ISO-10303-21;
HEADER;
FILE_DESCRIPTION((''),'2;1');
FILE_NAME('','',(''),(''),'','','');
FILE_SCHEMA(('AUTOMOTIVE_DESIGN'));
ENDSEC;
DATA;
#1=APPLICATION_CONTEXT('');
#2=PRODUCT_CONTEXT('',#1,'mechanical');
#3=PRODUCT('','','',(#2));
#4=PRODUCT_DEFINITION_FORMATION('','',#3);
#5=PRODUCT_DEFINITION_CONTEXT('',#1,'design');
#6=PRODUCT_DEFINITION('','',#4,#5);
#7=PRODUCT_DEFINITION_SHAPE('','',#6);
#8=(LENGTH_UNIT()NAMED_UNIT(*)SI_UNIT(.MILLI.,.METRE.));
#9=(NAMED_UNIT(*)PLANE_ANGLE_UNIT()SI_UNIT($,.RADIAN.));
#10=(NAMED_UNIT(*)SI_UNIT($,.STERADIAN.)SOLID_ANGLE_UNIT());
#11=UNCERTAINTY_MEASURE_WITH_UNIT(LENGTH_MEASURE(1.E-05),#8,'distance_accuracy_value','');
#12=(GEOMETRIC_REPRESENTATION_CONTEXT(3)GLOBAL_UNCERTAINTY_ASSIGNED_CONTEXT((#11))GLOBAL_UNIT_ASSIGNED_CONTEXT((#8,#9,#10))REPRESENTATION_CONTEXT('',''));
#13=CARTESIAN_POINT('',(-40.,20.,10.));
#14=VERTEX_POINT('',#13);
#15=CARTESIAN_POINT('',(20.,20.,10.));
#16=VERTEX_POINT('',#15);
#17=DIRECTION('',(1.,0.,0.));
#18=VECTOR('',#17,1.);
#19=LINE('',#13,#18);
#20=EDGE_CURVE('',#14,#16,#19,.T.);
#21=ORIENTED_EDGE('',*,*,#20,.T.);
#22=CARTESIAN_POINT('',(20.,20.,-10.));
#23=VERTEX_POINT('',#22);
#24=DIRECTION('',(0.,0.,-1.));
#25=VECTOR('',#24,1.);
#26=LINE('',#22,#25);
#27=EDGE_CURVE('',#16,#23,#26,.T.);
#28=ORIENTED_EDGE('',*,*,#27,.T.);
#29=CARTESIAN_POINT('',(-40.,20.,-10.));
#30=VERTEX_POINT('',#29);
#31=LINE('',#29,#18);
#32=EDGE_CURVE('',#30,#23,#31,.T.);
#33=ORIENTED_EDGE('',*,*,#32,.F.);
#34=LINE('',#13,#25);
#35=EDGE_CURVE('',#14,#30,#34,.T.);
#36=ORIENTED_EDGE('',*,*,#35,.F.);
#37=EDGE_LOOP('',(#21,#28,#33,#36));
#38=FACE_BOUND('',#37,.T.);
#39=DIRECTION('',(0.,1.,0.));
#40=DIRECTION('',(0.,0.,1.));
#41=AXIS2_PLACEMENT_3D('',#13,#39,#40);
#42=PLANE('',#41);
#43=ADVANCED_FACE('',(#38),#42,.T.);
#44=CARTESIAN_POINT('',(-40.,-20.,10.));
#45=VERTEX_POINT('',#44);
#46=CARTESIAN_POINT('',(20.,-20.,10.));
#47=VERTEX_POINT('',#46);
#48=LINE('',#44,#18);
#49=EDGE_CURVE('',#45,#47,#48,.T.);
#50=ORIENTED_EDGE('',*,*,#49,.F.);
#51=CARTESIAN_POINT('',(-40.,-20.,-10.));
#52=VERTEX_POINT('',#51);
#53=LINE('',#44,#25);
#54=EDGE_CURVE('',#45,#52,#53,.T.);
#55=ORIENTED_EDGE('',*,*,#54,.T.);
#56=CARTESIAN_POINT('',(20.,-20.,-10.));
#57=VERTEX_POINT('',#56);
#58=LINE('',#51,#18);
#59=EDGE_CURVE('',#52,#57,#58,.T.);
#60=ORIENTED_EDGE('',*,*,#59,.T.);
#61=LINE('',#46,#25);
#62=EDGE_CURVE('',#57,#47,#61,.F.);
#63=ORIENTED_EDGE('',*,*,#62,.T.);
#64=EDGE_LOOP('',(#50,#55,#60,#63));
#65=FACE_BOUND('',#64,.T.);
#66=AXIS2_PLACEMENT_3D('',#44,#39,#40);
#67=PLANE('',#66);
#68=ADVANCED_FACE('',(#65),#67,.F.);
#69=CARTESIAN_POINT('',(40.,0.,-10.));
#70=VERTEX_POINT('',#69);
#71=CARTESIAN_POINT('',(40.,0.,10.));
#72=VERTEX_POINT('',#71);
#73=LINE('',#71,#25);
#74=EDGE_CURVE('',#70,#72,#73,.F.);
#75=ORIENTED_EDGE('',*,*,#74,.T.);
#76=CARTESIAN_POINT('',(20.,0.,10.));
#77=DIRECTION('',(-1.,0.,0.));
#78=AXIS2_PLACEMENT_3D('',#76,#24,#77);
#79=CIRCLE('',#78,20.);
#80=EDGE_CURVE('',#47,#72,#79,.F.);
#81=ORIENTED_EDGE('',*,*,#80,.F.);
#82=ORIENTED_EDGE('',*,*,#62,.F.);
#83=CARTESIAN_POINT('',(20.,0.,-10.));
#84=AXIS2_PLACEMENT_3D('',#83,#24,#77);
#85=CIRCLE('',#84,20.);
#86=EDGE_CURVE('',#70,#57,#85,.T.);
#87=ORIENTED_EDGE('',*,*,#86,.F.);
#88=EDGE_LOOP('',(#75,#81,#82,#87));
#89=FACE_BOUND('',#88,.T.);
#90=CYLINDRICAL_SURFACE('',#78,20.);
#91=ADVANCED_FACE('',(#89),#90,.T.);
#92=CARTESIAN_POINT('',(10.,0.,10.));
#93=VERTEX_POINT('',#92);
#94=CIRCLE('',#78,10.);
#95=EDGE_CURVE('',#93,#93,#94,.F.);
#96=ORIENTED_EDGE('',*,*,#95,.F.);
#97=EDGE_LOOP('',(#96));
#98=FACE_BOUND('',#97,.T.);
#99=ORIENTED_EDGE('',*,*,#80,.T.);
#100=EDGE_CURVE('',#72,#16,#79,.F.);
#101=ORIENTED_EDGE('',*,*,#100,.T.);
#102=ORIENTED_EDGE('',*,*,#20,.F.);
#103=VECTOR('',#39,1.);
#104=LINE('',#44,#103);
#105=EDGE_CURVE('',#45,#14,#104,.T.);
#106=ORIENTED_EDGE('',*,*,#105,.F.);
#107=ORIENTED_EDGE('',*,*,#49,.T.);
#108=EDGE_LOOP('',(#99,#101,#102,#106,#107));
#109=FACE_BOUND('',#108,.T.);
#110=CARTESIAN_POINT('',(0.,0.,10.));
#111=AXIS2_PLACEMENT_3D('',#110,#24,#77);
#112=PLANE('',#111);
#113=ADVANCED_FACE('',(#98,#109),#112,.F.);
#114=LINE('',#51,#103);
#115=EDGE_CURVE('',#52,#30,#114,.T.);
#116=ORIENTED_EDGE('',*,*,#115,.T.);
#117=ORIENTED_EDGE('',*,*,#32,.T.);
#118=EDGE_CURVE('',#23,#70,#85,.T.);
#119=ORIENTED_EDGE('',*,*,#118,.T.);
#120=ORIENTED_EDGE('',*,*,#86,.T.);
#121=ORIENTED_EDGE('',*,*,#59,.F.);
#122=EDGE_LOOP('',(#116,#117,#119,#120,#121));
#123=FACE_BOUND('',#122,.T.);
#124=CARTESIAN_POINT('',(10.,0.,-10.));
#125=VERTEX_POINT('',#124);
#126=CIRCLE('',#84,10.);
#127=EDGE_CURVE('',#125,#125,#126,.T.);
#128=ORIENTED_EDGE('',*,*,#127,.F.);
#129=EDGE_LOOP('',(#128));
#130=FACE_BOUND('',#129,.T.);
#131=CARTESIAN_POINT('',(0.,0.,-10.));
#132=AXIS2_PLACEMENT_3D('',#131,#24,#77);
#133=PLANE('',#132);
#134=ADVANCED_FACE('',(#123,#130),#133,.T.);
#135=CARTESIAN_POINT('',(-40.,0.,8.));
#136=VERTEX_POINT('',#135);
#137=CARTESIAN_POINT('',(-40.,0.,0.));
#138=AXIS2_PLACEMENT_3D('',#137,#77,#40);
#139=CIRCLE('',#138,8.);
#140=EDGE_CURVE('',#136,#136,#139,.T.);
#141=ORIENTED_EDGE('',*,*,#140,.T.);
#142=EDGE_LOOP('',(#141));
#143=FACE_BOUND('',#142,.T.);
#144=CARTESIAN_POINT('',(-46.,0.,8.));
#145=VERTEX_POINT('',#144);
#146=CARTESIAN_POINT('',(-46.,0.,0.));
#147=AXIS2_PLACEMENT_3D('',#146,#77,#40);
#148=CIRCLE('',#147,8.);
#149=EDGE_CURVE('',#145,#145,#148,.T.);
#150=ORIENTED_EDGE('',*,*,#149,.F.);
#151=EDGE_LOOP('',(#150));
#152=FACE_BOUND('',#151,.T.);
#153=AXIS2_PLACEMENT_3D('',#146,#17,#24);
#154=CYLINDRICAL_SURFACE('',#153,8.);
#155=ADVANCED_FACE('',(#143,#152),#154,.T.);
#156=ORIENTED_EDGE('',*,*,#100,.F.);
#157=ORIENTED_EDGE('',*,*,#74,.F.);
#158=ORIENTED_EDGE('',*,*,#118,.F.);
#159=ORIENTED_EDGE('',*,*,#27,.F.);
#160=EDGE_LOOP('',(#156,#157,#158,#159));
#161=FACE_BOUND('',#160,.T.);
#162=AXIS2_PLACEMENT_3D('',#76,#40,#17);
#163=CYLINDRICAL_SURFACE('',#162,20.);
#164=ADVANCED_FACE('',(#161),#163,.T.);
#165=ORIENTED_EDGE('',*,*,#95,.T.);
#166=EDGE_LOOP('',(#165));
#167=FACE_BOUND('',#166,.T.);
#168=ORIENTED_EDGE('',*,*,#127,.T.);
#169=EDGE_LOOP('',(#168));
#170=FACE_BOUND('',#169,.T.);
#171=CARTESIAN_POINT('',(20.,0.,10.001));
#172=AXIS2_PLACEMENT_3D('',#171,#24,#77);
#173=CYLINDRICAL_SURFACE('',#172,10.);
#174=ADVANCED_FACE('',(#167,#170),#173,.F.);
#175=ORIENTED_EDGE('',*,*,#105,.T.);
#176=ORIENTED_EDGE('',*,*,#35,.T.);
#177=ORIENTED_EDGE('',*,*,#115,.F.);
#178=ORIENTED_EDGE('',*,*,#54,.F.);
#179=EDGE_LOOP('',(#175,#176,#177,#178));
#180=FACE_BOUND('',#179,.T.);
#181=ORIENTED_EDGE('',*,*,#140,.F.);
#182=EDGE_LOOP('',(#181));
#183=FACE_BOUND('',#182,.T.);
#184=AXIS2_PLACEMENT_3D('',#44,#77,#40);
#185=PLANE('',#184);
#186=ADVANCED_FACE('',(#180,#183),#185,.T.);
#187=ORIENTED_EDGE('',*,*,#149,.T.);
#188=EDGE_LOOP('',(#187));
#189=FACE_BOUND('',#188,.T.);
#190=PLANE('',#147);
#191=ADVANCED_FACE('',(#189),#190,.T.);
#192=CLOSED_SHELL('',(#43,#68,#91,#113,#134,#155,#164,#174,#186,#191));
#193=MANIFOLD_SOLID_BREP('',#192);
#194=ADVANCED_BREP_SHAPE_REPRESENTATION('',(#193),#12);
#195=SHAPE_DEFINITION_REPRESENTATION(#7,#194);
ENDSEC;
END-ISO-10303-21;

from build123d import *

# Parameters (mm, degrees)
SKETCH_2_W          = 80
SKETCH_2_H          = 40
EXTRUDE_1_DEPTH     = 10
FILLET_3_R          = 20
CUT_EXTRUDE_6_REACH = 50.99
SKETCH_8_R          = 10
SKETCH_9_R          = 8
EXTRUDE_2_DEPTH     = 6


with BuildPart() as part:
    # 草图2 → 凸台-拉伸1 (new, symmetric)
    with BuildSketch(Plane.XY):
        Rectangle(SKETCH_2_W, SKETCH_2_H)
    extrude(amount=EXTRUDE_1_DEPTH, both=True)

    # 圆角3
    fillet_3_edges = [part.edges().sort_by_distance(p)[0] for p in [
        (40, -20, 0),
        (40, 20, 0),
    ]]
    fillet(fillet_3_edges, radius=FILLET_3_R - 0.0001)  # a hair under: the kernel refuses the full size

    # 草图8 → 切除-拉伸6 (cut, up to next)
    with BuildSketch(Plane(origin=(0, 0, -10), x_dir=(-1, 0, 0), z_dir=(0, 0, -1)), mode=Mode.PRIVATE) as cut_extrude_6_sk1:
        with Locations((-20, 0)):
            Circle(SKETCH_8_R)
    cut_extrude_6_tool1 = extrude(cut_extrude_6_sk1.sketch, amount=-CUT_EXTRUDE_6_REACH, mode=Mode.PRIVATE) & part.part
    add(cut_extrude_6_tool1.solids().sort_by_distance((20, 0, -10))[0], mode=Mode.SUBTRACT)

    # 草图9 → 凸台-拉伸2 (add)
    with BuildSketch(Plane.ZY.offset(40)):
        Circle(SKETCH_9_R)
    extrude(amount=EXTRUDE_2_DEPTH)


solid = part.part
